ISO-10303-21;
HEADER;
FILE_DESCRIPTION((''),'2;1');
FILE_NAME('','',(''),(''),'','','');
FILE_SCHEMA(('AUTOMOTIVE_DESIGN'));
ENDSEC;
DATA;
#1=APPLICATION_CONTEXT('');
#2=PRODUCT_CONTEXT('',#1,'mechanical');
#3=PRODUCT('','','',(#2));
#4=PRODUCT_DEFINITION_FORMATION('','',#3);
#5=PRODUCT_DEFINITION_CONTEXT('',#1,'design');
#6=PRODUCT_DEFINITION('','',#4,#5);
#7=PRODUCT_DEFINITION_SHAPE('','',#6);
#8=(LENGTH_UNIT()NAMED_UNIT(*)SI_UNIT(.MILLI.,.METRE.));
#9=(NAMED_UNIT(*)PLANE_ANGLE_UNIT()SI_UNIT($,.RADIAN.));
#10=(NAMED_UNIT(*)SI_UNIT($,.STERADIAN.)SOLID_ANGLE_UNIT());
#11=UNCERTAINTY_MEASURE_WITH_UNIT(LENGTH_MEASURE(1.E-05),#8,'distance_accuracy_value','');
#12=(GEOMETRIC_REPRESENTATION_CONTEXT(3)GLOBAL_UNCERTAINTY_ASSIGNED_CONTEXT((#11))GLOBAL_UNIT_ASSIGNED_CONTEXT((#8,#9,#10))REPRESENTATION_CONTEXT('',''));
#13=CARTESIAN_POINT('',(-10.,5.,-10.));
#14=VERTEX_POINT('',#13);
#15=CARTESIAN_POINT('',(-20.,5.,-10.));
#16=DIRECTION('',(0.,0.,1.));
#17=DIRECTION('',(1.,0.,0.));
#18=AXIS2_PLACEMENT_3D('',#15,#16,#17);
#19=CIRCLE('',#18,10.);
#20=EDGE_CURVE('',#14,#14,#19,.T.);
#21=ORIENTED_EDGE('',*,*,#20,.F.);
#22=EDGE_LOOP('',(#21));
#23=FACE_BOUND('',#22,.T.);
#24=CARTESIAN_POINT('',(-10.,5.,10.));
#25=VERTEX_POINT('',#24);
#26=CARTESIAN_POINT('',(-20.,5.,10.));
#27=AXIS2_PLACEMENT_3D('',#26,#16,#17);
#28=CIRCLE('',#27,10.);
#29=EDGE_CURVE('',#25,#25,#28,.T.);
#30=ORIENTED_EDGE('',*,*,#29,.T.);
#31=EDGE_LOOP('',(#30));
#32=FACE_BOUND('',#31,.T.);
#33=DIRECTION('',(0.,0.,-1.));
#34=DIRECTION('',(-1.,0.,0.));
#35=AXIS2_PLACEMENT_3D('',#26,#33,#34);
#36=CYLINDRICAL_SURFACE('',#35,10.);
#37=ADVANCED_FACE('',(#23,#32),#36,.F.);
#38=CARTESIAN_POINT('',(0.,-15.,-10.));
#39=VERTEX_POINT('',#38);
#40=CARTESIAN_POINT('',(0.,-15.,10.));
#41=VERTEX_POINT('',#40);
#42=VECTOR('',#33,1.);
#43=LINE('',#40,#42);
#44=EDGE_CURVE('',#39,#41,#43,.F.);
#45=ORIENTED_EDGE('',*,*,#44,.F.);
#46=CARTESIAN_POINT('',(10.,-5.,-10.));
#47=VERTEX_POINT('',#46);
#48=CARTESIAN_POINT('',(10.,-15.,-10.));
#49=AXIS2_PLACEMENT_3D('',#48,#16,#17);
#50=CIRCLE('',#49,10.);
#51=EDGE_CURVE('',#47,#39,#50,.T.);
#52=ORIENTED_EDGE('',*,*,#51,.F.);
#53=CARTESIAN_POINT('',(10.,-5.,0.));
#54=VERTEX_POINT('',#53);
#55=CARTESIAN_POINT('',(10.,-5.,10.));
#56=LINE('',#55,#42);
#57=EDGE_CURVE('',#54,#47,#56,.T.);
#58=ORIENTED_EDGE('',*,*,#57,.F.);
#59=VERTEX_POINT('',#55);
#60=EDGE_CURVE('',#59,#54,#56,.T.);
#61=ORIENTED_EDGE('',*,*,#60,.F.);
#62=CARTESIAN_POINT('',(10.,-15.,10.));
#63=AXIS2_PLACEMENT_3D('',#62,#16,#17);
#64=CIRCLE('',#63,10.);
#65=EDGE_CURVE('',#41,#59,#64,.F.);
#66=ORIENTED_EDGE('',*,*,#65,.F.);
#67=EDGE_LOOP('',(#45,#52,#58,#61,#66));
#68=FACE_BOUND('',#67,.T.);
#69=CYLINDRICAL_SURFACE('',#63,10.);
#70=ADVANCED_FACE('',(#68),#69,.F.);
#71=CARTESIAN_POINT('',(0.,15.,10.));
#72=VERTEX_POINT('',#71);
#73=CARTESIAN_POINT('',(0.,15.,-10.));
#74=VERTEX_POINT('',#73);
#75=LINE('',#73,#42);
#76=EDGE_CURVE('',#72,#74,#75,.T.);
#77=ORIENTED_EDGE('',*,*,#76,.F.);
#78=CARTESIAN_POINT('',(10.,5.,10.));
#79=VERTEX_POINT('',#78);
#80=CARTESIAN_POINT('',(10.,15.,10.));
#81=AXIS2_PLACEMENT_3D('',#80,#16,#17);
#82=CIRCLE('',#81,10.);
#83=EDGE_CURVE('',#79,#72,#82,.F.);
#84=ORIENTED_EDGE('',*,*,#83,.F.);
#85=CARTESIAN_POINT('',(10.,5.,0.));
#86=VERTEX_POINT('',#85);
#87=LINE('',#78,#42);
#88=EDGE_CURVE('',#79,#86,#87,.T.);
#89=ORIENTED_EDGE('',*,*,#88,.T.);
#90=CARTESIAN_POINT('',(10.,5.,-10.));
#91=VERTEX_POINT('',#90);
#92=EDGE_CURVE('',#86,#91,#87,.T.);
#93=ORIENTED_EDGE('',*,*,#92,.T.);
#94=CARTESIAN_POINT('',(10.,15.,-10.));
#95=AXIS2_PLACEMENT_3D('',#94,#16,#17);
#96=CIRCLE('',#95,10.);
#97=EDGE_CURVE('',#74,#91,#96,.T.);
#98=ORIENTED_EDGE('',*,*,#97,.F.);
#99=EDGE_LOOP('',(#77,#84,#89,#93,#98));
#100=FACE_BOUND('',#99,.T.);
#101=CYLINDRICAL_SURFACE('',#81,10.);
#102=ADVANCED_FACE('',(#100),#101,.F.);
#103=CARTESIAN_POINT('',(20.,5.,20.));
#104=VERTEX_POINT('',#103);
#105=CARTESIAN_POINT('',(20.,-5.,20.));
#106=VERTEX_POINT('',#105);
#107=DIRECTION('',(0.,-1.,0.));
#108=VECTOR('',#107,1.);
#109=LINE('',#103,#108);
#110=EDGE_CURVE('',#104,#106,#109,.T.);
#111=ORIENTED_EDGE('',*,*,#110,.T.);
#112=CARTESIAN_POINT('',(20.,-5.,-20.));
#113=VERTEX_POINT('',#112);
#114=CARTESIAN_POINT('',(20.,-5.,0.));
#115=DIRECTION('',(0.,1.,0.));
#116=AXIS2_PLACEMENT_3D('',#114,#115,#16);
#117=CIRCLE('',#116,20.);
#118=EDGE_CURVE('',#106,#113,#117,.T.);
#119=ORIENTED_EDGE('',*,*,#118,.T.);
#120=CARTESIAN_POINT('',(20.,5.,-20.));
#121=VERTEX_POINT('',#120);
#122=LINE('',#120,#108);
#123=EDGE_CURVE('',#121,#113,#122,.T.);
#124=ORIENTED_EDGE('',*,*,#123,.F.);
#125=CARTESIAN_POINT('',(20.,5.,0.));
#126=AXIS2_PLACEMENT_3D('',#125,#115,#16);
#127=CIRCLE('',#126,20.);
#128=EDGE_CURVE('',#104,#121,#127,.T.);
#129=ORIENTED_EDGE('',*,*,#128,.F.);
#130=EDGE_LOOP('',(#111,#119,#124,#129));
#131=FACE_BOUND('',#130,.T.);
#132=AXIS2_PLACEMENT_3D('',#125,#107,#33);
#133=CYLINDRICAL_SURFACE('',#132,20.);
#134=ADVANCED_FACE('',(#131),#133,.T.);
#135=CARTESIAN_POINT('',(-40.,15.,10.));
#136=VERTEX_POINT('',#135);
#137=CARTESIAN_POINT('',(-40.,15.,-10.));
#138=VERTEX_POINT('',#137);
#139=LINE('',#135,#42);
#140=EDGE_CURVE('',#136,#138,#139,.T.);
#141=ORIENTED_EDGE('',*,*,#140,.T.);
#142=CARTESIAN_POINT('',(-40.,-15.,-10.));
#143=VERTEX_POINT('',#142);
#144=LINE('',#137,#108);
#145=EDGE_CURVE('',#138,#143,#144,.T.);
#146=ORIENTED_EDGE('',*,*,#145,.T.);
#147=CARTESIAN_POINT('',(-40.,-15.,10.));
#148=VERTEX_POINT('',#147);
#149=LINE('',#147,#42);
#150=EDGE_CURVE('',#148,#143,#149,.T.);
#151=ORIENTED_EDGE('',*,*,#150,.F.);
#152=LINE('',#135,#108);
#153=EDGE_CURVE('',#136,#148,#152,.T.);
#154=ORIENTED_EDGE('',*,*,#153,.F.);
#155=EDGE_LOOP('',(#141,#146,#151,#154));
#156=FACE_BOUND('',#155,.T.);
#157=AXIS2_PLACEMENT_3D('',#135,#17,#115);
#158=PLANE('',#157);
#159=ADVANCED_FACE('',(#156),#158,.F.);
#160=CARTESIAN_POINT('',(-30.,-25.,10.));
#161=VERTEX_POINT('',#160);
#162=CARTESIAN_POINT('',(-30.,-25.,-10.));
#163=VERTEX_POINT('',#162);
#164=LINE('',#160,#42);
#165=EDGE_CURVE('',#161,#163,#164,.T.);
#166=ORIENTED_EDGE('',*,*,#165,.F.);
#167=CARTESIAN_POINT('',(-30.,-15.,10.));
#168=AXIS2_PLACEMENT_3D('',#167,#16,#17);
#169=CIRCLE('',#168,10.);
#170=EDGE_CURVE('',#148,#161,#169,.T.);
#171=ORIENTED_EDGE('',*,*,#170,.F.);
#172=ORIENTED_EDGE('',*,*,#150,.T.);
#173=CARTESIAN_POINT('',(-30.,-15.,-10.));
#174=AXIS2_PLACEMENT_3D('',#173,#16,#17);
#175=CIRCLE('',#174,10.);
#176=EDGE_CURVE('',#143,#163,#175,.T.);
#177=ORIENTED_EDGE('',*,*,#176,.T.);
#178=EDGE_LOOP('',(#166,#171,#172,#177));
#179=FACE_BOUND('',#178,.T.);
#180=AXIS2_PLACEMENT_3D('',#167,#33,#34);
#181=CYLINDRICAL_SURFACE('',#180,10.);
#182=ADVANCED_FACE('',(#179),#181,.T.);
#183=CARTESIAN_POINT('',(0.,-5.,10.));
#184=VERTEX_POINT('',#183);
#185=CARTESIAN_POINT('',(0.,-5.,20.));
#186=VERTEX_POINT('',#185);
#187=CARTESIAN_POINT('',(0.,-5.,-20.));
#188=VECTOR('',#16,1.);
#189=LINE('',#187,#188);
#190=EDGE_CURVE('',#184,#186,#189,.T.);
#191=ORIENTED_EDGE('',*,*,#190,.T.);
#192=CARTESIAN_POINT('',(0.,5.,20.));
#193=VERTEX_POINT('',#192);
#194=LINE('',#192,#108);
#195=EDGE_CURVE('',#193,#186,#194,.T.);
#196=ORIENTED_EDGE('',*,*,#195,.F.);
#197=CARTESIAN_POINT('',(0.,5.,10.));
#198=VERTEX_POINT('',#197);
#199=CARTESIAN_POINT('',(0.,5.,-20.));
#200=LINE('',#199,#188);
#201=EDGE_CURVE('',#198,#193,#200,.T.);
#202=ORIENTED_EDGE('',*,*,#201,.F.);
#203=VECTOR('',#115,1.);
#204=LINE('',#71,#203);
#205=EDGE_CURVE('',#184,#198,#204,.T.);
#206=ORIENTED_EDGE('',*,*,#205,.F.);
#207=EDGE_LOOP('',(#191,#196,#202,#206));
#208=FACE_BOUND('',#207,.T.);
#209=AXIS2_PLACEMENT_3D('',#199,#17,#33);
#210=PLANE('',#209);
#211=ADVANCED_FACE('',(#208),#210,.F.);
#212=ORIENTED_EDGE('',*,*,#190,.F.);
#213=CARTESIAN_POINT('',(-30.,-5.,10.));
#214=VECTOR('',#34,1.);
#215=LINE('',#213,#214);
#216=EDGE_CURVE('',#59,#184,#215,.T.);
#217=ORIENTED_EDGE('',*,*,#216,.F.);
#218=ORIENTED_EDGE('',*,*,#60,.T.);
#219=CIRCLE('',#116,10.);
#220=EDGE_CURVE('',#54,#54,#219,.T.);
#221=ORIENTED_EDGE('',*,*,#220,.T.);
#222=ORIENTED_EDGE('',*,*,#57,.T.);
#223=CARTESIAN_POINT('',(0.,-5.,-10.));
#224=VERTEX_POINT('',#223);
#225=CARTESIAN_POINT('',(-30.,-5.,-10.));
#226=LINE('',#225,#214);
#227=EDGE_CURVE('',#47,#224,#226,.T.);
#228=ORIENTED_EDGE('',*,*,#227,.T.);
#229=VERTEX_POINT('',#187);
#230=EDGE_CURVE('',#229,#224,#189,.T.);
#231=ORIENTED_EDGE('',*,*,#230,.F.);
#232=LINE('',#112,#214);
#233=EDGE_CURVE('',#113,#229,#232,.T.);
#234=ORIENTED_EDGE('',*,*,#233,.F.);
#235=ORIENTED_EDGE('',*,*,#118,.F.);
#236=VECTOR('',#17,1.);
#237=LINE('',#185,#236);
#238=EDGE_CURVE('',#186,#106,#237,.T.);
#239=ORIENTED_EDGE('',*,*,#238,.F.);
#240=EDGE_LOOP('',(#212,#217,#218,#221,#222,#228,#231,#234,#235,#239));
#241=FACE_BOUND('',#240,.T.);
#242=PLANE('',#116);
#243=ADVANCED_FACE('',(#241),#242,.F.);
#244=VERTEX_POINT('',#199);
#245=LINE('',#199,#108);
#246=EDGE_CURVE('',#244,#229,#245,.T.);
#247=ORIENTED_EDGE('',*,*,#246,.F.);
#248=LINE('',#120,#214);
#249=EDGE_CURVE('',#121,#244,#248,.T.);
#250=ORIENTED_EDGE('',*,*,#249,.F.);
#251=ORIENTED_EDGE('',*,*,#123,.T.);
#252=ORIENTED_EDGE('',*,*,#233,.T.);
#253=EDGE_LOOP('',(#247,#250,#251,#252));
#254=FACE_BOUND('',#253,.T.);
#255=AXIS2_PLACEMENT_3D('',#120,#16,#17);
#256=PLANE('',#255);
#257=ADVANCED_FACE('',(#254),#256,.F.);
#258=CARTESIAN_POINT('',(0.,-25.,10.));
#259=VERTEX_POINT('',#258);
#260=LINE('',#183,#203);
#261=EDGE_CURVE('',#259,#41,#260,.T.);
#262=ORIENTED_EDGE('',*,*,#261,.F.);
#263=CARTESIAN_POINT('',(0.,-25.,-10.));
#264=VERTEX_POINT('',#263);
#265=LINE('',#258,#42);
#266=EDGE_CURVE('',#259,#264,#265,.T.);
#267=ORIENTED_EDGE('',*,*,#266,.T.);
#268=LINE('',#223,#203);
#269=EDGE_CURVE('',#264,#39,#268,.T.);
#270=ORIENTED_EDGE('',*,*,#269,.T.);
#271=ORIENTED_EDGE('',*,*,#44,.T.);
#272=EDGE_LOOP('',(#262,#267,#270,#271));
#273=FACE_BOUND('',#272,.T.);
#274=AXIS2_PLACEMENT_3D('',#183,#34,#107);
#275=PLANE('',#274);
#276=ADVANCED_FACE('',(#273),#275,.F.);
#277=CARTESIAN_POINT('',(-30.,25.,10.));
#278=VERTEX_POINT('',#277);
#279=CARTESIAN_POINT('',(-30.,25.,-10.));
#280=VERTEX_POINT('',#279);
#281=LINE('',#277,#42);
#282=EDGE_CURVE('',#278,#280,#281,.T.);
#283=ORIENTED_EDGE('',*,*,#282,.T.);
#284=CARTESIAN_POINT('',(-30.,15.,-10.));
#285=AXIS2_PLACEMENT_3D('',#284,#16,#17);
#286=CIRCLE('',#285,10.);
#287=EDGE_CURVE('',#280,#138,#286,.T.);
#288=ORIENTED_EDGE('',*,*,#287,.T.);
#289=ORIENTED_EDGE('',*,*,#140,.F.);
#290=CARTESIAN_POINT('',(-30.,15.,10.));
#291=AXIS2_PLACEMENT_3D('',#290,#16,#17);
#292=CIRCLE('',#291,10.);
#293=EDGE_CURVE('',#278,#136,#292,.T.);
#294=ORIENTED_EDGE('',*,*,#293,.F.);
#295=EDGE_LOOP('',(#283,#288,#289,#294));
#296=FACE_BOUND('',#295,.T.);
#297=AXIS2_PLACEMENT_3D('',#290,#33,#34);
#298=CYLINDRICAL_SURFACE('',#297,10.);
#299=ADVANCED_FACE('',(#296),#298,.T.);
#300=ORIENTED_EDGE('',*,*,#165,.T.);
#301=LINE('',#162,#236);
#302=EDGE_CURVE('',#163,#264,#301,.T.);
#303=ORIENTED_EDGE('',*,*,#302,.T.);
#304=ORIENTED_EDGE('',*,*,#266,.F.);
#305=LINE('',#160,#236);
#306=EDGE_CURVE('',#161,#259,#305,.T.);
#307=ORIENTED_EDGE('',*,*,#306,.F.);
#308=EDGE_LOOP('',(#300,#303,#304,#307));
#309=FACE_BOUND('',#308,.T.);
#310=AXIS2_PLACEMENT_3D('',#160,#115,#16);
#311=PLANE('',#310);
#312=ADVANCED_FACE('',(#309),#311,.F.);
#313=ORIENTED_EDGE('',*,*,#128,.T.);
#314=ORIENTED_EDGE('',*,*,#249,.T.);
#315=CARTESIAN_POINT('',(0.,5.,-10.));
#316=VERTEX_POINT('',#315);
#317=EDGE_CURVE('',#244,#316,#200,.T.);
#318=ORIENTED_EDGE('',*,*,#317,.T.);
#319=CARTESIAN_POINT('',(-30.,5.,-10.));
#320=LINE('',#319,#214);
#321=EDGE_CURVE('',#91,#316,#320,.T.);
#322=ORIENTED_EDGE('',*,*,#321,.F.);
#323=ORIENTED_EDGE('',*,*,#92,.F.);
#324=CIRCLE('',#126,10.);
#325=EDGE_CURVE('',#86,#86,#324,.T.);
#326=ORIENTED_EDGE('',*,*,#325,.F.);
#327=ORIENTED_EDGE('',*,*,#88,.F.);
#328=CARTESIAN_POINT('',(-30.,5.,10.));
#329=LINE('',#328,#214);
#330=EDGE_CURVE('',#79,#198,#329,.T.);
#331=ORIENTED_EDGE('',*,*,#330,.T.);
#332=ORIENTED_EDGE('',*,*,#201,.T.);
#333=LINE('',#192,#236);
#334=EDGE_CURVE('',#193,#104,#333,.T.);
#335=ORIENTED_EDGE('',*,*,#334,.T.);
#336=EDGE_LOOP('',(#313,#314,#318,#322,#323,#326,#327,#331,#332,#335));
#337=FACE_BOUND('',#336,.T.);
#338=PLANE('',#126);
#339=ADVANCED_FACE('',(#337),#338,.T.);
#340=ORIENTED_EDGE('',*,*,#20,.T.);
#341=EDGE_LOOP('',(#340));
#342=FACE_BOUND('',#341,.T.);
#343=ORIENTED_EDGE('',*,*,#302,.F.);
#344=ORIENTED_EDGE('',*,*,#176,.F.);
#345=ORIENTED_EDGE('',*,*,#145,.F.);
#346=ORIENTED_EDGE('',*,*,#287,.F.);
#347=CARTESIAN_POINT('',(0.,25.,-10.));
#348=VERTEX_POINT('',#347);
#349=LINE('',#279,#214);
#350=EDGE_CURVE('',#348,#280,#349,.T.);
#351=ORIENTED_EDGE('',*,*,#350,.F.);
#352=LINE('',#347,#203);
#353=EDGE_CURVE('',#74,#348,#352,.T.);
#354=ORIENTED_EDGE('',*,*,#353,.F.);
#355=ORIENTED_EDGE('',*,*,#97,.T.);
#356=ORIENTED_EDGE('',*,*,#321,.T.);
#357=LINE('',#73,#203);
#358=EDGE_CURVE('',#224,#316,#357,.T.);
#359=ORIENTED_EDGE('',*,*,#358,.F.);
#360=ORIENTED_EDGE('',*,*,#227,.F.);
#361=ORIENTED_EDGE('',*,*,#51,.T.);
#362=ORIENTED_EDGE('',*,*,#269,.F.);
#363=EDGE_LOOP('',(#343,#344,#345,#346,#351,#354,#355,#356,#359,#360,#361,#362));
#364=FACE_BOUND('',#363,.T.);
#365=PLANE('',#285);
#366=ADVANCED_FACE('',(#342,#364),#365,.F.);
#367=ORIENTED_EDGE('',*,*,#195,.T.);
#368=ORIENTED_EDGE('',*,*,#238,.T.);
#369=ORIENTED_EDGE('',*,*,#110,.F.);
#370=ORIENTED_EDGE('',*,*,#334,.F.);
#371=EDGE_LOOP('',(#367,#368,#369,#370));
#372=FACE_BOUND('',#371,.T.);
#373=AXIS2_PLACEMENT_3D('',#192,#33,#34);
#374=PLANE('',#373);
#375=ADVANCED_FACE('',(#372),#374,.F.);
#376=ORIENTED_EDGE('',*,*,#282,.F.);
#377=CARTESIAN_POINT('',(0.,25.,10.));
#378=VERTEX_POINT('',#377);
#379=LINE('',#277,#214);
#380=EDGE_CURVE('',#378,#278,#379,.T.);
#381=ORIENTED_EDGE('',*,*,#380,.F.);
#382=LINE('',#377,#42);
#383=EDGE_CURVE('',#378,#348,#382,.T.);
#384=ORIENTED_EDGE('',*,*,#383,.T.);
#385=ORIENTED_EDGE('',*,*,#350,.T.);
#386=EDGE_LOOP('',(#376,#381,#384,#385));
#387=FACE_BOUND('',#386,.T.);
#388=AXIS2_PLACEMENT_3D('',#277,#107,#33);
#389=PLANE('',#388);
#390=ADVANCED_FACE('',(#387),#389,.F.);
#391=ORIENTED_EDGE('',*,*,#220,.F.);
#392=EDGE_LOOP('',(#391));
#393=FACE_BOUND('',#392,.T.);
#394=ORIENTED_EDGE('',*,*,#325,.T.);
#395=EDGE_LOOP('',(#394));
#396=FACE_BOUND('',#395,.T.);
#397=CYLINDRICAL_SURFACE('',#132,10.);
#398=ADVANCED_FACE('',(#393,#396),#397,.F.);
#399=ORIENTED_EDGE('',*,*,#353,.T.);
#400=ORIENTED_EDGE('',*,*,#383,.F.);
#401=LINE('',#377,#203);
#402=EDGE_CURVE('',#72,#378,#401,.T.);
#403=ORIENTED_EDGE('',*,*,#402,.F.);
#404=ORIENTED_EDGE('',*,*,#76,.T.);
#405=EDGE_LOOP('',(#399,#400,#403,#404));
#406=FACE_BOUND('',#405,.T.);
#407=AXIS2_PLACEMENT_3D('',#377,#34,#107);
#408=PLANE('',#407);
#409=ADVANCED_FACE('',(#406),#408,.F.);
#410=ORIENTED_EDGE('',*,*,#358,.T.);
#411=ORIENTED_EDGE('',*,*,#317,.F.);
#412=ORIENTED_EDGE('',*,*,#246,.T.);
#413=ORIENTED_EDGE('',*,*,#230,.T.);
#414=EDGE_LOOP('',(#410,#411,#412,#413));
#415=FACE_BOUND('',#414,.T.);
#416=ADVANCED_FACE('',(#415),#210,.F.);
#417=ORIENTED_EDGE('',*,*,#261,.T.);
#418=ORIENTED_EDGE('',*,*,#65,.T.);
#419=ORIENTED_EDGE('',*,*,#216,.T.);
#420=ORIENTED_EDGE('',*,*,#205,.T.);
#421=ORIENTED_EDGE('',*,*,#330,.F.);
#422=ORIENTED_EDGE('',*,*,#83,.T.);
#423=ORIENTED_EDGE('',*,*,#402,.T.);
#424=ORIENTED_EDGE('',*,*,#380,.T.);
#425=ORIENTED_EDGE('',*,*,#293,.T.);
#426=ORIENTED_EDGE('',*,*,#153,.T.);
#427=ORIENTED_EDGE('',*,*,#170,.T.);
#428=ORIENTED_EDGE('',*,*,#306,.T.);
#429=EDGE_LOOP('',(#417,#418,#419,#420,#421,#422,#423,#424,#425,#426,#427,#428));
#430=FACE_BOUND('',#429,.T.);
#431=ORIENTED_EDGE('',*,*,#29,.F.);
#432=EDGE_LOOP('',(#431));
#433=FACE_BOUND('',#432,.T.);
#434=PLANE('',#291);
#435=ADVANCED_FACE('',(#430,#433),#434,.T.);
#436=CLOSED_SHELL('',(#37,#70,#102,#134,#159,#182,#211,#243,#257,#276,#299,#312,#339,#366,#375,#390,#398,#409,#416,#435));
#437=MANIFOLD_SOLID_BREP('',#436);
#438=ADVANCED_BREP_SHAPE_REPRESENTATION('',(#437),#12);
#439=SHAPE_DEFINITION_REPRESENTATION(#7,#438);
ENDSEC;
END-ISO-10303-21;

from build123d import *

# Parameters (mm, degrees)
SKETCH_1_R      = 10
EXTRUDE_1_DEPTH = 10
FILLET_1_R      = 10
SKETCH_2_R      = 10
EXTRUDE_2_DEPTH = 5


with BuildPart() as part:
    # 草圖1 → 填料-伸長1 (new, symmetric)
    with BuildSketch(Plane.XY):
        with BuildLine():
            Line((0, -5), (0, -25))
            Line((0, -25), (-30, -25))
            ThreePointArc((-30, -25), (-37.071067812, -22.071067812), (-40, -15))
            Line((-40, -15), (-40, 15))
            ThreePointArc((-40, 15), (-37.071067812, 22.071067812), (-30, 25))
            Line((-30, 25), (0, 25))
            Line((0, 25), (0, 5))
            Line((0, 5), (10, 5))
            Line((10, 5), (10, -5))
            Line((10, -5), (0, -5))
        make_face()
        with Locations((-20, 5)):
            Circle(SKETCH_1_R, mode=Mode.SUBTRACT)
    extrude(amount=EXTRUDE_1_DEPTH, both=True)

    # 圓角1
    fillet_1_edges = [part.edges().sort_by_distance(p)[0] for p in [
        (0, -5, 0),
        (0, 5, 0),
    ]]
    fillet(fillet_1_edges, radius=FILLET_1_R - 0.0001)  # a hair under: the kernel refuses the full size

    # 草圖2 → 填料-伸長2 (add, symmetric)
    with BuildSketch(Plane(origin=(0, 0, 0), x_dir=(1, 0, 0), z_dir=(0, 1, 0))):
        with BuildLine():
            Line((20, 20), (0, 20))
            Line((0, 20), (0, -20))
            Line((0, -20), (20, -20))
            ThreePointArc((20, -20), (40, 0), (20, 20))
        make_face()
        with Locations(Location((20, 0, 0), (0, 0, 180))):
            Circle(SKETCH_2_R, mode=Mode.SUBTRACT)
    extrude(amount=EXTRUDE_2_DEPTH, both=True)


solid = part.part
